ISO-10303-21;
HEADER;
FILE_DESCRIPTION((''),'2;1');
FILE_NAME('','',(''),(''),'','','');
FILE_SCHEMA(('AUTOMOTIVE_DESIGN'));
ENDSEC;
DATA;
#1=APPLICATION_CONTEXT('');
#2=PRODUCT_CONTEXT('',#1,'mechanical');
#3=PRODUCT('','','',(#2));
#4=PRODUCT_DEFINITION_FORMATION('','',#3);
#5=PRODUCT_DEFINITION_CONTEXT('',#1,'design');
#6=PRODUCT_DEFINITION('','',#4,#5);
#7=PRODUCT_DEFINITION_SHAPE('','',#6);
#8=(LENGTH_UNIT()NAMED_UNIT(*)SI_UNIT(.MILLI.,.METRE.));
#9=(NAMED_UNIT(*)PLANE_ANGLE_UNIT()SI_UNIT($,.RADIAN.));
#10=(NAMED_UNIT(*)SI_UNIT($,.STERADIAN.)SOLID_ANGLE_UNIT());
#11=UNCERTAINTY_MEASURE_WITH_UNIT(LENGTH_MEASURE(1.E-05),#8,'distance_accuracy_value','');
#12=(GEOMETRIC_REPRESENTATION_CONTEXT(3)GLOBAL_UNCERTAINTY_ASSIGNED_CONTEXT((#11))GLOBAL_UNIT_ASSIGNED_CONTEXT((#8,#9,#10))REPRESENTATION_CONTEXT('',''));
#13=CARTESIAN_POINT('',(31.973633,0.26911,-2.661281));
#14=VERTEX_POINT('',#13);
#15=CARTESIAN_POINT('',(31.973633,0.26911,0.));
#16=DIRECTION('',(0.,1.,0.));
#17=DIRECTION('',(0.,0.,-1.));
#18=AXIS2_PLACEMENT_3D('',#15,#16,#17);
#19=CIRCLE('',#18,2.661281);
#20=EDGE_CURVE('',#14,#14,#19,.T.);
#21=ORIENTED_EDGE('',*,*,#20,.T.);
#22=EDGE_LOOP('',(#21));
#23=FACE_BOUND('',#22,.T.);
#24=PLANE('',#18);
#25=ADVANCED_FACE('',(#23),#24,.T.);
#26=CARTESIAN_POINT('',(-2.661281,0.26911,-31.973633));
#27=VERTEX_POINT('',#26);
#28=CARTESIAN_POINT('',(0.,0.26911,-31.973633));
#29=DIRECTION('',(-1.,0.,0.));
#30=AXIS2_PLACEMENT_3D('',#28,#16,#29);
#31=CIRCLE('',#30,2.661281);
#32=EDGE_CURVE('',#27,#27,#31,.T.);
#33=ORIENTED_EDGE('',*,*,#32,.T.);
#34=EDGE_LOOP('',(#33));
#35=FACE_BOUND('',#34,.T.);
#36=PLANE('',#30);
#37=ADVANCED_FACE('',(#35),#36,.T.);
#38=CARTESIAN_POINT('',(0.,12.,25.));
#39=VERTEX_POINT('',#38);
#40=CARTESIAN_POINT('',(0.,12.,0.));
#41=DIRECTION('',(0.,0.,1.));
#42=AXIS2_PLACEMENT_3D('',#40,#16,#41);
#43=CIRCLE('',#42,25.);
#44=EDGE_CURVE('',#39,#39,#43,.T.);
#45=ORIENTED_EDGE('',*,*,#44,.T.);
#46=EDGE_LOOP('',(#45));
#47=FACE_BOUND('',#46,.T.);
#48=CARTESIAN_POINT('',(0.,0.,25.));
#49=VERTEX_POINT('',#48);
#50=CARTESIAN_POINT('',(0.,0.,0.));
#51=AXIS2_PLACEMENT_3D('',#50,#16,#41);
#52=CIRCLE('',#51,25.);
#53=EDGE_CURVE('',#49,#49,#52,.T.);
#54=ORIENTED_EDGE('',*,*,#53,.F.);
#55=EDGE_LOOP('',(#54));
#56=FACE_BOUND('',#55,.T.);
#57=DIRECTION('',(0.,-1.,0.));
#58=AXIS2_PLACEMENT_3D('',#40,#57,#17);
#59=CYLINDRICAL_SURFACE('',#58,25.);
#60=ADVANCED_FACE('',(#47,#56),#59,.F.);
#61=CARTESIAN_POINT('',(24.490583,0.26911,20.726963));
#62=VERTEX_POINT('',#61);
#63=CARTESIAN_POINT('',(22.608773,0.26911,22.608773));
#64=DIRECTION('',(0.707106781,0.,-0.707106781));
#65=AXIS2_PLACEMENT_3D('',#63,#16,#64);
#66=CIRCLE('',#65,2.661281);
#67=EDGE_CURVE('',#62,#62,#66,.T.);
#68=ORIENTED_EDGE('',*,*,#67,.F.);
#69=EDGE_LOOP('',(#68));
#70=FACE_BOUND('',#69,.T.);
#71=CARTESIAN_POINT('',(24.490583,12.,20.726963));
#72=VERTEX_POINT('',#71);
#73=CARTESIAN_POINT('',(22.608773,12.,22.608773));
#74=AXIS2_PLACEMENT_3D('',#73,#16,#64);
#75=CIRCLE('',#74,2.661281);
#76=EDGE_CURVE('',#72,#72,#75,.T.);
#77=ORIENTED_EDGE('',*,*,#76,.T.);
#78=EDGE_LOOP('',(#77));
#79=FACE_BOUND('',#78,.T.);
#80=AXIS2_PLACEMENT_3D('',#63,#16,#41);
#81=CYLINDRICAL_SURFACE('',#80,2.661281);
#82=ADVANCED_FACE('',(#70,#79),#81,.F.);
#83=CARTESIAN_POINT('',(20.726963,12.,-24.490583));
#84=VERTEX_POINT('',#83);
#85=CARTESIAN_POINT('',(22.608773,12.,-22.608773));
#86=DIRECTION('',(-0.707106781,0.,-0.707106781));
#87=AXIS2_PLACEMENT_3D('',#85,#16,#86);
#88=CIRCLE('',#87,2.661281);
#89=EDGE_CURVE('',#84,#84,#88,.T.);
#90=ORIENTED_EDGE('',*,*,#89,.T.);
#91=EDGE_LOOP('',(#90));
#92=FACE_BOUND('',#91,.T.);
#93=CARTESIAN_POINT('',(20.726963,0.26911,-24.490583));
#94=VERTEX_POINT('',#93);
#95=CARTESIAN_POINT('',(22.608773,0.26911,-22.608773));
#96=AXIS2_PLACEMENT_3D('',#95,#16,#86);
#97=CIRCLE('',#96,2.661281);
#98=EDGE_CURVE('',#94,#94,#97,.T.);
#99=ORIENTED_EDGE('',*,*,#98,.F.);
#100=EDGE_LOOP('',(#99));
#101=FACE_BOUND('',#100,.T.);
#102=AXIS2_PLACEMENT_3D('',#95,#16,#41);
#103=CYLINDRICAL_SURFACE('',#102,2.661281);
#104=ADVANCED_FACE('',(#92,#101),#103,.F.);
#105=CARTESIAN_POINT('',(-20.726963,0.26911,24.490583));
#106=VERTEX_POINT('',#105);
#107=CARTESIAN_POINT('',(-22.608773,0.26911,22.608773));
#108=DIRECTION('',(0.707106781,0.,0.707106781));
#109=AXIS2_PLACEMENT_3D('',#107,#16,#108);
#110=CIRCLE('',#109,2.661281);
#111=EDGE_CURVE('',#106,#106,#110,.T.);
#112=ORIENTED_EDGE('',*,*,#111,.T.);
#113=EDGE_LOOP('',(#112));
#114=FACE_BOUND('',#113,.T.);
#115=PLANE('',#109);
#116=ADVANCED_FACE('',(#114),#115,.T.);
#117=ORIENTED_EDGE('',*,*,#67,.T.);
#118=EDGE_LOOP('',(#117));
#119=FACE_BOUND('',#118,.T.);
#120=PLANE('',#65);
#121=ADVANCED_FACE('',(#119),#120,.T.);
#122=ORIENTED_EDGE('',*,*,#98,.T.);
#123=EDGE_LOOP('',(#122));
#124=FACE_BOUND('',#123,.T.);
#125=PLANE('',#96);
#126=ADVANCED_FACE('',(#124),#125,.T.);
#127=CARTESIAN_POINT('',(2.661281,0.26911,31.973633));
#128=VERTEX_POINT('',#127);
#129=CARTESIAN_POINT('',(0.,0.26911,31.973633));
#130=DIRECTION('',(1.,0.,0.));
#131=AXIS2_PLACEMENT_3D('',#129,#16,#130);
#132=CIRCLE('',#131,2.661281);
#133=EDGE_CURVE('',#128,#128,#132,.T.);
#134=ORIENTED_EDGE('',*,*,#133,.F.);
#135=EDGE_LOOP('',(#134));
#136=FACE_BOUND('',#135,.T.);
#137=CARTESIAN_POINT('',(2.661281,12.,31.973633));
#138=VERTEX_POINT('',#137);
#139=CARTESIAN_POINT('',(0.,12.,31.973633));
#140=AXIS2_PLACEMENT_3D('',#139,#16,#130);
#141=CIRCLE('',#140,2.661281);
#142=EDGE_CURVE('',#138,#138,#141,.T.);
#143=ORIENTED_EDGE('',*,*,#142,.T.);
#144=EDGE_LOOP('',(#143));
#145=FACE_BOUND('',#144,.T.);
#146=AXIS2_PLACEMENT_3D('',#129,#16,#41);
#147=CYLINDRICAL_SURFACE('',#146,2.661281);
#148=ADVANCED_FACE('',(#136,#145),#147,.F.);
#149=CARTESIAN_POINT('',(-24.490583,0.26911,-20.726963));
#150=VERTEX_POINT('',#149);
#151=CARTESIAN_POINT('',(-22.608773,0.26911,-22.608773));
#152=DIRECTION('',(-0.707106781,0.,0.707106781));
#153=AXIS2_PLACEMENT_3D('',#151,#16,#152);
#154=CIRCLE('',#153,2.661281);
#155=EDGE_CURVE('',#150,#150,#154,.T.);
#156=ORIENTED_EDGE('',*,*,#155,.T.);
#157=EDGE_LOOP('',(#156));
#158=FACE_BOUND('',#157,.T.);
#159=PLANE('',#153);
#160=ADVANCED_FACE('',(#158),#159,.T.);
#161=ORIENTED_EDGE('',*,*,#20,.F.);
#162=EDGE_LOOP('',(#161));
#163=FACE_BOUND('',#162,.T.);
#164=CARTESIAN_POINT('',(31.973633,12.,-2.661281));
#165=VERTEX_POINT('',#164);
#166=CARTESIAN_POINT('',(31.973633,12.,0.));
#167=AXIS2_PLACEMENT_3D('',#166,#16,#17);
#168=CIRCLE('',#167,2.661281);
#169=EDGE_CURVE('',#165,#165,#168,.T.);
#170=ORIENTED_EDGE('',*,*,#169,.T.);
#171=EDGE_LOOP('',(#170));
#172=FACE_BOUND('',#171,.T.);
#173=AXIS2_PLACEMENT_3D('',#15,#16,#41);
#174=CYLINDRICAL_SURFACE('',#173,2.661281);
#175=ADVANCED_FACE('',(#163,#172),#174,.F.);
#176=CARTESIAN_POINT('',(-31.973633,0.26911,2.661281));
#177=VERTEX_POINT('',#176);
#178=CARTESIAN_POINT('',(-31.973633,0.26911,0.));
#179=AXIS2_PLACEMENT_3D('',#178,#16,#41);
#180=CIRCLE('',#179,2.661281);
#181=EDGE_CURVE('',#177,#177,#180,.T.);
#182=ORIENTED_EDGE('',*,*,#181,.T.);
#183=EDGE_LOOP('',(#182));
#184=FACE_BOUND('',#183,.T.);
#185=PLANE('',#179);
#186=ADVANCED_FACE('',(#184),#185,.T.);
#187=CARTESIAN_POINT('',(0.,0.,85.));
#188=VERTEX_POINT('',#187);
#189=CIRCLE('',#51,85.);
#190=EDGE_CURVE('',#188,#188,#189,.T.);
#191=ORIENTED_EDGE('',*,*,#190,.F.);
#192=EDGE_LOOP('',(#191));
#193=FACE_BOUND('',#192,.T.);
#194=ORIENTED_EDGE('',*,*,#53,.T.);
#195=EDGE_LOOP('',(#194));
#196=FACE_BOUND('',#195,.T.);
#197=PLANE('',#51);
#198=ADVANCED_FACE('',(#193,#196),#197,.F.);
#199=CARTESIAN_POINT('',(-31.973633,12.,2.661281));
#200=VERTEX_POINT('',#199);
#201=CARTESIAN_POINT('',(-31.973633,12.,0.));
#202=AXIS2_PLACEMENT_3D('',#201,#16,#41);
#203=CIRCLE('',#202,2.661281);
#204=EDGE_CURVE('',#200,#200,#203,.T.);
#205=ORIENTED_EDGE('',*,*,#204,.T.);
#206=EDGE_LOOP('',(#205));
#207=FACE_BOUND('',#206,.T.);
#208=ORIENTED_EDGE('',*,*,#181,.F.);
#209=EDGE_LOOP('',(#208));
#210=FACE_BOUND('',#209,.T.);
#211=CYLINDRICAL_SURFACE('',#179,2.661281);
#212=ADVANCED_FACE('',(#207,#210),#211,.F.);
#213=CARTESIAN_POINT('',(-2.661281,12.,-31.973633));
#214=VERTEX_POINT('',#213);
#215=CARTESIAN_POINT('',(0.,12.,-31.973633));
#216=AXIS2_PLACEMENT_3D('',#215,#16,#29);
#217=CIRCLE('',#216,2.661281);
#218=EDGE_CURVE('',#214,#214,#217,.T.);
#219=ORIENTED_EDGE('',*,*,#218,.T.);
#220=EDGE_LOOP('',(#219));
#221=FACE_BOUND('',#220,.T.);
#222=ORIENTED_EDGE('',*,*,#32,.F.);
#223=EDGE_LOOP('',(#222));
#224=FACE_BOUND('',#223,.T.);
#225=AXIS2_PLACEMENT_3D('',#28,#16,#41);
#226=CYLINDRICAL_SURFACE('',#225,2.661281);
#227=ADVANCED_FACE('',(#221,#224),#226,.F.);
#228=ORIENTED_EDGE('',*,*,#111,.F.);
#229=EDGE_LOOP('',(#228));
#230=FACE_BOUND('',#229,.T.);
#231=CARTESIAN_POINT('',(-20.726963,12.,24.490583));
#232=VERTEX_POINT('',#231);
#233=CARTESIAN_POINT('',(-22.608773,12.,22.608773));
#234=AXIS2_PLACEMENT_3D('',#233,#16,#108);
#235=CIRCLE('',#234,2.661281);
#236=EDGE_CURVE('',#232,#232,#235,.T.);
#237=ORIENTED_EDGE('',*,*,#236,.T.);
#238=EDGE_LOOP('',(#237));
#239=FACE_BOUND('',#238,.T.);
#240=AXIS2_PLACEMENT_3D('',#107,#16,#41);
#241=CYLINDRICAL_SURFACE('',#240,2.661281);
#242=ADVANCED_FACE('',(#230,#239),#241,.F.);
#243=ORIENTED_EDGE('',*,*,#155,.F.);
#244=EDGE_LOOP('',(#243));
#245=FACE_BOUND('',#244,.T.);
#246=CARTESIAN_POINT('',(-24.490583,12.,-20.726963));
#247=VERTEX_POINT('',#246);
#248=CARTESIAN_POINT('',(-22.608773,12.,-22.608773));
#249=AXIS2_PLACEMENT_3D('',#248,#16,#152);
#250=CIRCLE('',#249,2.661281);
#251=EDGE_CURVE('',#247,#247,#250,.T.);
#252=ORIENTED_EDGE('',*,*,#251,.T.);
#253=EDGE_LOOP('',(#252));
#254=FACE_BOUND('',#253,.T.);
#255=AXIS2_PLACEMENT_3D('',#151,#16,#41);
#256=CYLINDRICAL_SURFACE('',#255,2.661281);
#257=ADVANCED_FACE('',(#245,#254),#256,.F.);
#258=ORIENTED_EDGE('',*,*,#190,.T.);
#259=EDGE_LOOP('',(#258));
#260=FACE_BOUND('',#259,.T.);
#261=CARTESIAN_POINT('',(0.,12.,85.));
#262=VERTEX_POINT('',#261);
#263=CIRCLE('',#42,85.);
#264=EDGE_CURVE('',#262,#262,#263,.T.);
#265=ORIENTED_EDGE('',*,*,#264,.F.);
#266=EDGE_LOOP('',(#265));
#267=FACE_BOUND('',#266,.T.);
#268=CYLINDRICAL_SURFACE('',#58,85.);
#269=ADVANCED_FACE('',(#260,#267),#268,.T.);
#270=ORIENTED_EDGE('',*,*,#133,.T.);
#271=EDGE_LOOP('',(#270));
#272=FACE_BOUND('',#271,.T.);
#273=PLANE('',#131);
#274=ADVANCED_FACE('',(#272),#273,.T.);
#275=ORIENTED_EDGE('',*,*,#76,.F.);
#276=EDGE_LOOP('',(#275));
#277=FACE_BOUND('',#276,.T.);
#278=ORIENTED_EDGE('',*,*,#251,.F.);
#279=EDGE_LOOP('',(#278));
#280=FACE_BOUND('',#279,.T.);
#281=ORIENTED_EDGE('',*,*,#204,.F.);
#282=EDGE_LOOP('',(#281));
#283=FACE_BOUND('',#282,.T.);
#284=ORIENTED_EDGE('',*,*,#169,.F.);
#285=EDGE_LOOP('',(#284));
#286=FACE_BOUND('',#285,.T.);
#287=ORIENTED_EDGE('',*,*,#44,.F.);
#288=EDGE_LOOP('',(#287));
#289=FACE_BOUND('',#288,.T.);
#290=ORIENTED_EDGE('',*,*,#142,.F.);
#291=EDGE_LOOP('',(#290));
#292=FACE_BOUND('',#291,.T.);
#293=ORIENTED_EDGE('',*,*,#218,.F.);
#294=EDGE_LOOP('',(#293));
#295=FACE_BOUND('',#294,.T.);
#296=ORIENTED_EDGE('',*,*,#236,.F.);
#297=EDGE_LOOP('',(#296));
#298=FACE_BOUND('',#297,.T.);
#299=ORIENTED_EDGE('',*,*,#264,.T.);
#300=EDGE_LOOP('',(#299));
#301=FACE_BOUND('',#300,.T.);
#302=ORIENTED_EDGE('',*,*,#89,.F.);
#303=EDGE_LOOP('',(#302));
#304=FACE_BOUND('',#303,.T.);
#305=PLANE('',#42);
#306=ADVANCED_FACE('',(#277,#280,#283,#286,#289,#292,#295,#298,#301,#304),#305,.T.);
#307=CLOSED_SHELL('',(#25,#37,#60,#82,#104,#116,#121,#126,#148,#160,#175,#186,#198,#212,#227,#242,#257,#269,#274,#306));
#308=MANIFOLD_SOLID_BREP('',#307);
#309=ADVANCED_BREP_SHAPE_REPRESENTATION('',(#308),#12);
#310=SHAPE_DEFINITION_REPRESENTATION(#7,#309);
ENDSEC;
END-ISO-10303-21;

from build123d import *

# Parameters (mm, degrees)
SKETCH1_R           = 85
BOSS_EXTRUDE1_DEPTH = 12
SKETCH2_R           = 25
CUT_EXTRUDE1_DEPTH  = 121.805629008
SKETCH3_R           = 2.661281078
CUT_EXTRUDE2_DEPTH  = 11.7308905
CIRPATTERN1_COUNT   = 8


with BuildPart() as part:
    # Sketch1 → Boss-Extrude1 (new body)
    with BuildSketch(Plane(origin=(0, 0, 0), x_dir=(1, 0, 0), z_dir=(0, 1, 0))):
        Circle(SKETCH1_R)
    extrude(amount=BOSS_EXTRUDE1_DEPTH)

    # Sketch2 → Cut-Extrude1 (cut, through all)
    with BuildSketch(Plane(origin=(0, 0, 0), x_dir=(1, 0, 0), z_dir=(0, 1, 0))):
        Circle(SKETCH2_R)
    extrude(amount=CUT_EXTRUDE1_DEPTH, mode=Mode.SUBTRACT)

    # Sketch3 → Cut-Extrude2 (cut)
    with BuildSketch(Plane(origin=(0, 12, 0), x_dir=(1, 0, 0), z_dir=(0, 1, 0))):
        with Locations((-31.973633211, 0)):
            Circle(SKETCH3_R)
    cut_extrude2 = extrude(amount=-CUT_EXTRUDE2_DEPTH, mode=Mode.SUBTRACT)

    # CirPattern1: Cut-Extrude2 ×8 about axis
    cirpattern1_axis = Axis((0, 0, 0), (0, 1, 0))
    for i in range(1, CIRPATTERN1_COUNT):
        add(cut_extrude2.rotate(cirpattern1_axis, i * 360 / CIRPATTERN1_COUNT), mode=Mode.SUBTRACT)


solid = part.part
